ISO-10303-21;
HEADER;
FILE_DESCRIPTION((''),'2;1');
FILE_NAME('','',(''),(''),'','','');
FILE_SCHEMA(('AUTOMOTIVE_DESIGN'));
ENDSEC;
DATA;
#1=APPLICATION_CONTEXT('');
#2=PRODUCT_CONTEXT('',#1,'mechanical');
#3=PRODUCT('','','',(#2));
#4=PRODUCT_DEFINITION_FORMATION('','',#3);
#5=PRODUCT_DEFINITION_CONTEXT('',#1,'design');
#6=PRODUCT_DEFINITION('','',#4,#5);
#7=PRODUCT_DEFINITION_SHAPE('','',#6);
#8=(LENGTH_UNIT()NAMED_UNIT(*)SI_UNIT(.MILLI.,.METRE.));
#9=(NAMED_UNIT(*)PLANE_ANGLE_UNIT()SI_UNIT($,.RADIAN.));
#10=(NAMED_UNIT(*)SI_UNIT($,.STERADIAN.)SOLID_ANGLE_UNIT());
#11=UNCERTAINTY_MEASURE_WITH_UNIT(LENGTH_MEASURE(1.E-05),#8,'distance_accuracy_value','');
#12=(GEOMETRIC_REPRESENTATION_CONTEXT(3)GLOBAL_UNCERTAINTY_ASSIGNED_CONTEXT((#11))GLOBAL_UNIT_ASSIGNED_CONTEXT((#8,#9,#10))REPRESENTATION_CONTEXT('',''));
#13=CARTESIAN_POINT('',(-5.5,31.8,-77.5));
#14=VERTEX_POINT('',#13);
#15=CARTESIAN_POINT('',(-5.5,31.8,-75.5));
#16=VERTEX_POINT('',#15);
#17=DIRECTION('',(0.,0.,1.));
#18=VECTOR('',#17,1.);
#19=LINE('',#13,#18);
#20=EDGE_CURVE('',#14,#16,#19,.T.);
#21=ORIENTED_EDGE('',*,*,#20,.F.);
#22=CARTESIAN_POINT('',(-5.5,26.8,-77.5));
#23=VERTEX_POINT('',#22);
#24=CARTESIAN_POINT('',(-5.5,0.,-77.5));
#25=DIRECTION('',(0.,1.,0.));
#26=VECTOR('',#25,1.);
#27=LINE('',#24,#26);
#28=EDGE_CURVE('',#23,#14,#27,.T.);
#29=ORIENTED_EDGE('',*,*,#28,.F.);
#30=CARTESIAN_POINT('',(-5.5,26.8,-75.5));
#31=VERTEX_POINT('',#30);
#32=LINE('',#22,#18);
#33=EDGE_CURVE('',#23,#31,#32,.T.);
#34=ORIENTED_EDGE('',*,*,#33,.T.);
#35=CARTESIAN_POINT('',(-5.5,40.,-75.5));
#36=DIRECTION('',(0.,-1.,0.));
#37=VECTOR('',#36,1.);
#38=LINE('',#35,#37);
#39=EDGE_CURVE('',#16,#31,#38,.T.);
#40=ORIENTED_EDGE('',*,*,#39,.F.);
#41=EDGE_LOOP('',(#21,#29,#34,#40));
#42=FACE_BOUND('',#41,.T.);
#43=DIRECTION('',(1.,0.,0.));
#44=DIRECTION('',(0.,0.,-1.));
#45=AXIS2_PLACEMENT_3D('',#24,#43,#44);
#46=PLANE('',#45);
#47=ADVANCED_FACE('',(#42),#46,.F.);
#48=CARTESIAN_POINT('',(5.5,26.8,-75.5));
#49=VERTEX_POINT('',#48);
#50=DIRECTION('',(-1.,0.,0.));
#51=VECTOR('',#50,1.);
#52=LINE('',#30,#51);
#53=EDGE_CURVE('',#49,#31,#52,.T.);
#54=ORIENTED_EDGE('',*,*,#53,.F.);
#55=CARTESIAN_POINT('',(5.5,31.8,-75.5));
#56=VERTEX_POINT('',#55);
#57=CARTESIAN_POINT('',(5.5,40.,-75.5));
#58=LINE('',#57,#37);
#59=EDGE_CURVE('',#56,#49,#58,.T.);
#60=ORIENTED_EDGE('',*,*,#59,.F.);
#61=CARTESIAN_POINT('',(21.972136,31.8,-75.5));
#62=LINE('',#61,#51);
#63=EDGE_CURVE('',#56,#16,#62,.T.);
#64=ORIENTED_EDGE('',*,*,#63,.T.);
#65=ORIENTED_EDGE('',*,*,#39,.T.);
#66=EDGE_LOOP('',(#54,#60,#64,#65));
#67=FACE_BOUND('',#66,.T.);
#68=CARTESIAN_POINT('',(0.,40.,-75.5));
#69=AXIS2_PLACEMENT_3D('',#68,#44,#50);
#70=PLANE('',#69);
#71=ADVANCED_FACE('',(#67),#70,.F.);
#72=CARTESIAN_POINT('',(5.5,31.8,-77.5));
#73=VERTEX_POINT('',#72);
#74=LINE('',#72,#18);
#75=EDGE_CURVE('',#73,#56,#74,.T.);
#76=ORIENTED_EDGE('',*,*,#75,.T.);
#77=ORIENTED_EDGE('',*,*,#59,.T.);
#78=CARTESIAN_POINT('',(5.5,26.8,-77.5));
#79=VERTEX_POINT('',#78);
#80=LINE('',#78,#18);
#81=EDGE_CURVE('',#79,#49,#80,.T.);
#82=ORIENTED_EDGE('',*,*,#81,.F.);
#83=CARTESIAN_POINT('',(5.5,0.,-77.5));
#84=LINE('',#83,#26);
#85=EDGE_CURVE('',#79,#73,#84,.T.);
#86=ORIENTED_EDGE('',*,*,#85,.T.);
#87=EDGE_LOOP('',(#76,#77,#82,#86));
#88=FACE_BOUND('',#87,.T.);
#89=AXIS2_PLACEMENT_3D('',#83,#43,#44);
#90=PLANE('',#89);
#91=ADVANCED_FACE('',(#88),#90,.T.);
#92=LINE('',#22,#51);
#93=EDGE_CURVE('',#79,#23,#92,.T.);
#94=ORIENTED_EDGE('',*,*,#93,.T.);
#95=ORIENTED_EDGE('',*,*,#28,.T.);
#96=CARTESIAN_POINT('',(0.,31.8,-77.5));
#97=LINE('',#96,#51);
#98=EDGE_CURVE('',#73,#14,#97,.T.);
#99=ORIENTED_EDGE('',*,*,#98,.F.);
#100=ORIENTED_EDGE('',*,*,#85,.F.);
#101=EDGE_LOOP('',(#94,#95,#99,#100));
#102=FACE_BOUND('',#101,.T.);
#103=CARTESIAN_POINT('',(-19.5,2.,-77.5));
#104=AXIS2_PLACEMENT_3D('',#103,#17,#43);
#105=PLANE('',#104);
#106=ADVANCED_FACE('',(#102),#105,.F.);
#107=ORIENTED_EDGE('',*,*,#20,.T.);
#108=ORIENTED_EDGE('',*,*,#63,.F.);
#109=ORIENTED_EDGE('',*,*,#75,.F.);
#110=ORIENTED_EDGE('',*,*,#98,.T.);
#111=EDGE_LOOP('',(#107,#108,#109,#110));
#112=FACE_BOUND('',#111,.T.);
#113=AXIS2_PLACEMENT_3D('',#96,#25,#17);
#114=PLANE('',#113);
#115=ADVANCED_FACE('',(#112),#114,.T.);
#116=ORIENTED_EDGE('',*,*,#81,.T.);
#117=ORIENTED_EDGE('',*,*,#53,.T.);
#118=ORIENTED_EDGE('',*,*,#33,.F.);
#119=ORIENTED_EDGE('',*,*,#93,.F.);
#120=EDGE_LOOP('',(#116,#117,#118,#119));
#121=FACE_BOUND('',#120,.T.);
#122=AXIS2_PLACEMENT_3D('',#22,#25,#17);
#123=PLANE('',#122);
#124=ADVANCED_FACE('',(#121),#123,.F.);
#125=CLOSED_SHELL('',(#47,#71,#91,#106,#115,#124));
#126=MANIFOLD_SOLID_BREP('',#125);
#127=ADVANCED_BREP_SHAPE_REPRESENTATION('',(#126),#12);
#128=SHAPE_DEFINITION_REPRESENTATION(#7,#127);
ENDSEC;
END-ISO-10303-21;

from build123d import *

# Parameters (mm, degrees)
SKETCH1_W                       = 39
SKETCH1_H                       = 155
BOSS_EXTRUDE1_DEPTH             = 2
BOSS_EXTRUDE2_DEPTH             = 38
SKETCH3_W                       = 2
SKETCH3_H                       = 2
BOSS_EXTRUDE3_DEPTH             = 38
SKETCH4_W                       = 2
SKETCH4_H                       = 2
BOSS_EXTRUDE4_DEPTH             = 151
SKETCH6_W                       = 35
SKETCH6_H                       = 2.2
CUT_EXTRUDE1_DEPTH              = 160.340045186
SKETCH7_W                       = 35
SKETCH7_H                       = 2.2
CUT_EXTRUDE2_DEPTH              = 89.490112442
SKETCH5_W                       = 31
SKETCH5_H                       = 2
BOSS_EXTRUDE5_DEPTH             = 2
BOSS_EXTRUDE6_REACH             = 91.367
SKETCH8_W                       = 2
SKETCH8_H                       = 2
BOSS_EXTRUDE6_DIRECTION_2_REACH = 91.367
SKETCH10_W                      = 2
SKETCH10_H                      = 2.2
SKETCH10_W_2                    = 2.2
SKETCH10_H_2                    = 2
BOSS_EXTRUDE8_DEPTH             = 2
SKETCH11_W                      = 2
SKETCH11_H                      = 2.2
SKETCH11_W_2                    = 2.2
SKETCH11_H_2                    = 2
BOSS_EXTRUDE9_DEPTH             = 2
FILLET2_R                       = 2.5
SKETCH14_W                      = 36.5
SKETCH14_H                      = 7.75
BOSS_EXTRUDE10_DEPTH            = 2
SKETCH13_W                      = 31
SKETCH13_H                      = 3
CUT_EXTRUDE4_DEPTH              = 2
FILLET3_R                       = 2
FILLET4_R                       = 0.5
SKETCH15_R                      = 5.1
CUT_EXTRUDE5_DEPTH              = 90.367219941
SKETCH16_R                      = 7.1
BOSS_EXTRUDE11_DEPTH            = 1
FILLET5_R                       = 0.5
FILLET7_R                       = 0.5
CUT_EXTRUDE6_DEPTH              = 6
SKETCH18_W                      = 29
SKETCH18_H                      = 3
CUT_EXTRUDE8_DEPTH              = 90.367219986
CUT_EXTRUDE11_DEPTH             = 90.367219986
CUT_EXTRUDE11_DEPTH_BACK        = 90.367219986
SKETCH20_W                      = 5
SKETCH20_H                      = 40
SKETCH21_W                      = 9
SKETCH21_H                      = 31
CUT_EXTRUDE12_DEPTH             = 89.41097217
CUT_EXTRUDE13_DEPTH             = 41.425858061
CUT_EXTRUDE13_DEPTH_BACK        = 41.425858061
SKETCH22_W                      = 11
SKETCH22_H                      = 8.2
SKETCH23_W                      = 11
SKETCH23_H                      = 17.8
CUT_EXTRUDE14_DEPTH             = 33.334037793


with BuildPart() as part:
    # Sketch1 → Boss-Extrude1 (new body)
    with BuildSketch(Plane(origin=(0, 0, 0), x_dir=(1, 0, 0), z_dir=(0, 1, 0))):
        Rectangle(SKETCH1_W, SKETCH1_H)
    extrude(amount=BOSS_EXTRUDE1_DEPTH)

    # Sketch2 → Boss-Extrude2 (add)
    with BuildSketch(Plane(origin=(0, 2, 0), x_dir=(1, 0, 0), z_dir=(0, 1, 0))):
        Polygon((-17.5, -77.5), (-17.5, -75.5), (-17.5, 75.5), (17.5, 75.5), (17.5, -75.5), (17.5, -77.5), (19.5, -77.5), (19.5, 77.5), (-19.5, 77.5), (-19.5, -77.5), align=None)
    extrude(amount=BOSS_EXTRUDE2_DEPTH)

    # Sketch3 → Boss-Extrude3 (add)
    with BuildSketch(Plane(origin=(0, 2, 0), x_dir=(1, 0, 0), z_dir=(0, 1, 0))):
        with Locations((-16.5, -76.5)):
            Rectangle(SKETCH3_W, SKETCH3_H)
        with Locations((-16.5, -72.3)):
            Rectangle(SKETCH3_W, SKETCH3_H)
        with Locations((16.5, -76.5)):
            Rectangle(SKETCH3_W, SKETCH3_H)
        with Locations((16.5, -72.3)):
            Rectangle(SKETCH3_W, SKETCH3_H)
    extrude(amount=BOSS_EXTRUDE3_DEPTH)

    # Sketch4 → Boss-Extrude4 (add)
    with BuildSketch(Plane.XY.offset(-75.5)):
        with Locations((-16.5, 39)):
            Rectangle(SKETCH4_W, SKETCH4_H)
        Polygon((-15.5, 33.8), (-17.5, 31.8), (-17.5, 35.8), (-15.5, 35.8), align=None)
        Polygon((15.5, 35.8), (17.5, 35.8), (17.5, 31.8), (15.5, 33.8), align=None)
        with Locations((16.5, 39)):
            Rectangle(SKETCH4_W, SKETCH4_H)
    extrude(amount=BOSS_EXTRUDE4_DEPTH)

    # Sketch6 → Cut-Extrude1 (cut, through all)
    with BuildSketch(Plane.XY.offset(-75.5)):
        with Locations((0, 36.9)):
            Rectangle(SKETCH6_W, SKETCH6_H)
    extrude(amount=CUT_EXTRUDE1_DEPTH, mode=Mode.SUBTRACT)

    # Sketch7 → Cut-Extrude2 (cut, through all)
    with BuildSketch(Plane(origin=(0, 2, 0), x_dir=(1, 0, 0), z_dir=(0, 1, 0))):
        with Locations((0, -74.4)):
            Rectangle(SKETCH7_W, SKETCH7_H)
    extrude(amount=CUT_EXTRUDE2_DEPTH, mode=Mode.SUBTRACT)

    # Sketch5 → Boss-Extrude5 (add)
    with BuildSketch(Plane(origin=(0, 2, 0), x_dir=(1, 0, 0), z_dir=(0, 1, 0))):
        with Locations((0, -76.5)):
            Rectangle(SKETCH5_W, SKETCH5_H)
        with Locations((0, -72.3)):
            Rectangle(SKETCH5_W, SKETCH5_H)
    extrude(amount=BOSS_EXTRUDE5_DEPTH)

    # Boss-Extrude6: up to this face of the body (flat: up to its plane)
    boss_extrude6_end = Plane(part.part.faces().sort_by_distance((17.5, 16.9, -2.1))[0])
    # Sketch8 → Boss-Extrude6 (add, up to the picked face)
    with BuildSketch(Plane(origin=(0, 0, 0), x_dir=(0, 0, -1), z_dir=(1, 0, 0)), mode=Mode.PRIVATE) as boss_extrude6_sk1:
        with Locations((74.5, 39)):
            Rectangle(SKETCH8_W, SKETCH8_H)
    boss_extrude6_tool1 = split(extrude(boss_extrude6_sk1.sketch, amount=BOSS_EXTRUDE6_REACH, mode=Mode.PRIVATE), bisect_by=boss_extrude6_end, keep=Keep.BOTH, mode=Mode.PRIVATE)
    # Sketch8 → Boss-Extrude6 (add, up to the picked face)
    with BuildSketch(Plane(origin=(0, 0, 0), x_dir=(0, 0, -1), z_dir=(1, 0, 0)), mode=Mode.PRIVATE) as boss_extrude6_sk2:
        Polygon((75.5, 35.8), (73.5, 35.8), (73.5, 33.8), (75.5, 31.8), align=None)
    boss_extrude6_tool2 = split(extrude(boss_extrude6_sk2.sketch, amount=BOSS_EXTRUDE6_REACH, mode=Mode.PRIVATE), bisect_by=boss_extrude6_end, keep=Keep.BOTH, mode=Mode.PRIVATE)
    add(boss_extrude6_tool1.solids().sort_by(Axis((0, 39, -74.5), (1, 0, 0)))[0])
    add(boss_extrude6_tool2.solids().sort_by(Axis((0, 34.244444, -74.611111), (1, 0, 0)))[0])

    # Boss-Extrude6 direction 2: up to this face of the body (flat: up to its plane)
    boss_extrude6_direction_2_end = Plane(part.part.faces().sort_by_distance((-17.5, 16.9, -2.1))[0])
    # Sketch8 → Boss-Extrude6 direction 2 (add, up to the picked face)
    with BuildSketch(Plane(origin=(0, 0, 0), x_dir=(0, 0, -1), z_dir=(1, 0, 0)), mode=Mode.PRIVATE) as boss_extrude6_direction_2_sk1:
        with Locations((74.5, 39)):
            Rectangle(SKETCH8_W, SKETCH8_H)
    boss_extrude6_direction_2_tool1 = split(extrude(boss_extrude6_direction_2_sk1.sketch, amount=-BOSS_EXTRUDE6_DIRECTION_2_REACH, mode=Mode.PRIVATE), bisect_by=boss_extrude6_direction_2_end, keep=Keep.BOTH, mode=Mode.PRIVATE)
    # Sketch8 → Boss-Extrude6 direction 2 (add, up to the picked face)
    with BuildSketch(Plane(origin=(0, 0, 0), x_dir=(0, 0, -1), z_dir=(1, 0, 0)), mode=Mode.PRIVATE) as boss_extrude6_direction_2_sk2:
        Polygon((75.5, 35.8), (73.5, 35.8), (73.5, 33.8), (75.5, 31.8), align=None)
    boss_extrude6_direction_2_tool2 = split(extrude(boss_extrude6_direction_2_sk2.sketch, amount=-BOSS_EXTRUDE6_DIRECTION_2_REACH, mode=Mode.PRIVATE), bisect_by=boss_extrude6_direction_2_end, keep=Keep.BOTH, mode=Mode.PRIVATE)
    add(boss_extrude6_direction_2_tool1.solids().sort_by(Axis((0, 39, -74.5), (-1, 0, 0)))[0])
    add(boss_extrude6_direction_2_tool2.solids().sort_by(Axis((0, 34.244444, -74.611111), (-1, 0, 0)))[0])

    # Sketch10 → Boss-Extrude8 (add)
    with BuildSketch(Plane(origin=(-17.5, 0, 0), x_dir=(0, 0, -1), z_dir=(1, 0, 0))):
        with Locations((-76.5, 36.9)):
            Rectangle(SKETCH10_W, SKETCH10_H)
        with Locations((-74.4, 39)):
            Rectangle(SKETCH10_W_2, SKETCH10_H_2)
    extrude(amount=BOSS_EXTRUDE8_DEPTH)

    # Sketch11 → Boss-Extrude9 (add)
    with BuildSketch(Plane.ZY.offset(-17.5)):
        with Locations((76.5, 36.9)):
            Rectangle(SKETCH11_W, SKETCH11_H)
        with Locations((74.4, 39)):
            Rectangle(SKETCH11_W_2, SKETCH11_H_2)
    extrude(amount=BOSS_EXTRUDE9_DEPTH)

    # Fillet2
    fillet2_edges = [part.edges().sort_by_distance(p)[0] for p in [
        (-17.5, 16.9, 71.3),
        (17.5, 16.9, 71.3),
        (19.5, 20, 77.5),
        (-19.5, 20, 77.5),
        (-19.5, 20, -77.5),
        (-17.5, 16.9, -75.5),
        (17.5, 16.9, -75.5),
        (19.5, 20, -77.5),
        (19.5, 40, 0),
        (-19.5, 40, 0),
        (19.5, 0, 0),
        (-19.5, 0, 0),
        (0, 40, -77.5),
        (0, 0, 77.5),
        (0, 0, -77.5),
        (-17.5, 40, 77.5),
        (17.5, 40, 77.5),
    ]]
    fillet(fillet2_edges, radius=FILLET2_R)

    # Sketch14 → Boss-Extrude10 (add)
    with BuildSketch(Plane.XY.offset(-75.5)):
        with Locations((0, 5.125)):
            Rectangle(SKETCH14_W, SKETCH14_H)
    extrude(amount=BOSS_EXTRUDE10_DEPTH)

    # Sketch13 → Cut-Extrude4 (cut)
    with BuildSketch(Plane(origin=(0, 0, -77.5), x_dir=(-1, 0, 0), z_dir=(0, 0, -1))):
        with Locations((0, 5.5)):
            Rectangle(SKETCH13_W, SKETCH13_H)
    extrude(amount=-CUT_EXTRUDE4_DEPTH, mode=Mode.SUBTRACT)

    # Fillet3
    fillet3_edges = [part.edges().sort_by_distance(p)[0] for p in [
        (0, 9, -73.5),
    ]]
    fillet(fillet3_edges, radius=FILLET3_R - 0.0001)  # a hair under: the kernel refuses the full size

    # Fillet4
    fillet4_edges = [part.edges().sort_by_distance(p)[0] for p in [
        (15.5, 5.5, -75.5),
        (15.5, 4, -76.5),
        (0, 7, -75.5),
        (15.5, 7, -76.5),
        (-15.5, 5.5, -75.5),
        (-15.5, 7, -76.5),
        (0, 4, -75.5),
        (-15.5, 4, -76.5),
        (15.5, 5.5, -77.5),
        (0, 4, -77.5),
        (-15.5, 5.5, -77.5),
        (0, 7, -77.5),
    ]]
    fillet(fillet4_edges, radius=FILLET4_R)

    # Sketch15 → Cut-Extrude5 (cut, through all)
    with BuildSketch(Plane.XZ):
        with Locations(Location((0, 38.75, 0), (0, 0, 270))):
            Circle(SKETCH15_R)
        with Locations(Location((0, -38.75, 0), (0, 0, 270))):
            Circle(SKETCH15_R)
    extrude(amount=-CUT_EXTRUDE5_DEPTH, mode=Mode.SUBTRACT)

    # Sketch16 → Boss-Extrude11 (add)
    with BuildSketch(Plane(origin=(0, 2, 0), x_dir=(1, 0, 0), z_dir=(0, 1, 0))):
        with Locations(Location((0, 38.75, 0), (0, 0, 270))):
            Circle(SKETCH16_R)
        with Locations(Location((0, -38.75, 0), (0, 0, 270))):
            Circle(SKETCH16_R)
    extrude(amount=BOSS_EXTRUDE11_DEPTH)

    # Fillet5
    fillet5_edges = [part.edges().sort_by_distance(p)[0] for p in [
        (0, 2, -45.85),
        (0, 3, -45.85),
        (0, 2, 31.65),
        (0, 3, 31.65),
    ]]
    fillet(fillet5_edges, radius=FILLET5_R - 0.0001)  # a hair under: the kernel refuses the full size

    # Fillet7
    fillet7_edges = [part.edges().sort_by_distance(p)[0] for p in [
        (15.5, 40, 0.75),
        (0, 4, 77.5),
        (0, 40, -73.5),
        (-15.5, 40, 0.75),
        (-15.5, 20.75, 77.5),
        (-15.5, 39.267766953, 76.767766953),
        (15.5, 20.75, 77.5),
        (15.5, 39.267766953, 76.767766953),
    ]]
    fillet(fillet7_edges, radius=FILLET7_R)

    # Sketch17 → Cut-Extrude6 (cut)
    with BuildSketch(Plane.XZ):
        Polygon((-17, -77.5), (-17, 70.299999999), (-14.999999999, 71.3), (-14.999999999, 77.5), (14.999999999, 77.5), (14.999999999, 71.3), (17, 70.299999999), (17, -77.5), align=None)
    extrude(amount=-CUT_EXTRUDE6_DEPTH, mode=Mode.SUBTRACT)

    # Sketch18 → Cut-Extrude8 (cut, through all)
    with BuildSketch(Plane.XY):
        with Locations((0, 7.5)):
            Rectangle(SKETCH18_W, SKETCH18_H)
    extrude(amount=-CUT_EXTRUDE8_DEPTH, mode=Mode.SUBTRACT)

    # Sketch20 → Cut-Extrude11 (cut, two sides: drawn at the far end of the back side and taken through both)
    with BuildSketch(Plane.XY.offset(-CUT_EXTRUDE11_DEPTH_BACK)):
        Polygon((19.5, 40), (14.5, 40), (14.5, 6), (14.5, 0), (19.5, 0), align=None)
        with Locations((-17, 20)):
            Rectangle(SKETCH20_W, SKETCH20_H)
    extrude(amount=CUT_EXTRUDE11_DEPTH + CUT_EXTRUDE11_DEPTH_BACK, mode=Mode.SUBTRACT)

    # Sketch21 → Cut-Extrude12 (cut, through all)
    with BuildSketch(Plane.XY):
        with Locations((-10, 24.5)):
            Rectangle(SKETCH21_W, SKETCH21_H)
        with Locations((10, 24.5)):
            Rectangle(SKETCH21_W, SKETCH21_H)
    extrude(amount=-CUT_EXTRUDE12_DEPTH, mode=Mode.SUBTRACT)

    # Sketch22 → Cut-Extrude13 (cut, two sides: drawn at the far end of the back side and taken through both)
    with BuildSketch(Plane.XY.offset(-75.5).offset(-CUT_EXTRUDE13_DEPTH_BACK)):
        with Locations((0, 35.9)):
            Rectangle(SKETCH22_W, SKETCH22_H)
    extrude(amount=CUT_EXTRUDE13_DEPTH + CUT_EXTRUDE13_DEPTH_BACK, mode=Mode.SUBTRACT)

    # Sketch23 → Cut-Extrude14 (cut, through all)
    with BuildSketch(Plane.XY.offset(-75.5)):
        with Locations((0, 17.9)):
            Rectangle(SKETCH23_W, SKETCH23_H)
    extrude(amount=-CUT_EXTRUDE14_DEPTH, mode=Mode.SUBTRACT)


solid = part.part
